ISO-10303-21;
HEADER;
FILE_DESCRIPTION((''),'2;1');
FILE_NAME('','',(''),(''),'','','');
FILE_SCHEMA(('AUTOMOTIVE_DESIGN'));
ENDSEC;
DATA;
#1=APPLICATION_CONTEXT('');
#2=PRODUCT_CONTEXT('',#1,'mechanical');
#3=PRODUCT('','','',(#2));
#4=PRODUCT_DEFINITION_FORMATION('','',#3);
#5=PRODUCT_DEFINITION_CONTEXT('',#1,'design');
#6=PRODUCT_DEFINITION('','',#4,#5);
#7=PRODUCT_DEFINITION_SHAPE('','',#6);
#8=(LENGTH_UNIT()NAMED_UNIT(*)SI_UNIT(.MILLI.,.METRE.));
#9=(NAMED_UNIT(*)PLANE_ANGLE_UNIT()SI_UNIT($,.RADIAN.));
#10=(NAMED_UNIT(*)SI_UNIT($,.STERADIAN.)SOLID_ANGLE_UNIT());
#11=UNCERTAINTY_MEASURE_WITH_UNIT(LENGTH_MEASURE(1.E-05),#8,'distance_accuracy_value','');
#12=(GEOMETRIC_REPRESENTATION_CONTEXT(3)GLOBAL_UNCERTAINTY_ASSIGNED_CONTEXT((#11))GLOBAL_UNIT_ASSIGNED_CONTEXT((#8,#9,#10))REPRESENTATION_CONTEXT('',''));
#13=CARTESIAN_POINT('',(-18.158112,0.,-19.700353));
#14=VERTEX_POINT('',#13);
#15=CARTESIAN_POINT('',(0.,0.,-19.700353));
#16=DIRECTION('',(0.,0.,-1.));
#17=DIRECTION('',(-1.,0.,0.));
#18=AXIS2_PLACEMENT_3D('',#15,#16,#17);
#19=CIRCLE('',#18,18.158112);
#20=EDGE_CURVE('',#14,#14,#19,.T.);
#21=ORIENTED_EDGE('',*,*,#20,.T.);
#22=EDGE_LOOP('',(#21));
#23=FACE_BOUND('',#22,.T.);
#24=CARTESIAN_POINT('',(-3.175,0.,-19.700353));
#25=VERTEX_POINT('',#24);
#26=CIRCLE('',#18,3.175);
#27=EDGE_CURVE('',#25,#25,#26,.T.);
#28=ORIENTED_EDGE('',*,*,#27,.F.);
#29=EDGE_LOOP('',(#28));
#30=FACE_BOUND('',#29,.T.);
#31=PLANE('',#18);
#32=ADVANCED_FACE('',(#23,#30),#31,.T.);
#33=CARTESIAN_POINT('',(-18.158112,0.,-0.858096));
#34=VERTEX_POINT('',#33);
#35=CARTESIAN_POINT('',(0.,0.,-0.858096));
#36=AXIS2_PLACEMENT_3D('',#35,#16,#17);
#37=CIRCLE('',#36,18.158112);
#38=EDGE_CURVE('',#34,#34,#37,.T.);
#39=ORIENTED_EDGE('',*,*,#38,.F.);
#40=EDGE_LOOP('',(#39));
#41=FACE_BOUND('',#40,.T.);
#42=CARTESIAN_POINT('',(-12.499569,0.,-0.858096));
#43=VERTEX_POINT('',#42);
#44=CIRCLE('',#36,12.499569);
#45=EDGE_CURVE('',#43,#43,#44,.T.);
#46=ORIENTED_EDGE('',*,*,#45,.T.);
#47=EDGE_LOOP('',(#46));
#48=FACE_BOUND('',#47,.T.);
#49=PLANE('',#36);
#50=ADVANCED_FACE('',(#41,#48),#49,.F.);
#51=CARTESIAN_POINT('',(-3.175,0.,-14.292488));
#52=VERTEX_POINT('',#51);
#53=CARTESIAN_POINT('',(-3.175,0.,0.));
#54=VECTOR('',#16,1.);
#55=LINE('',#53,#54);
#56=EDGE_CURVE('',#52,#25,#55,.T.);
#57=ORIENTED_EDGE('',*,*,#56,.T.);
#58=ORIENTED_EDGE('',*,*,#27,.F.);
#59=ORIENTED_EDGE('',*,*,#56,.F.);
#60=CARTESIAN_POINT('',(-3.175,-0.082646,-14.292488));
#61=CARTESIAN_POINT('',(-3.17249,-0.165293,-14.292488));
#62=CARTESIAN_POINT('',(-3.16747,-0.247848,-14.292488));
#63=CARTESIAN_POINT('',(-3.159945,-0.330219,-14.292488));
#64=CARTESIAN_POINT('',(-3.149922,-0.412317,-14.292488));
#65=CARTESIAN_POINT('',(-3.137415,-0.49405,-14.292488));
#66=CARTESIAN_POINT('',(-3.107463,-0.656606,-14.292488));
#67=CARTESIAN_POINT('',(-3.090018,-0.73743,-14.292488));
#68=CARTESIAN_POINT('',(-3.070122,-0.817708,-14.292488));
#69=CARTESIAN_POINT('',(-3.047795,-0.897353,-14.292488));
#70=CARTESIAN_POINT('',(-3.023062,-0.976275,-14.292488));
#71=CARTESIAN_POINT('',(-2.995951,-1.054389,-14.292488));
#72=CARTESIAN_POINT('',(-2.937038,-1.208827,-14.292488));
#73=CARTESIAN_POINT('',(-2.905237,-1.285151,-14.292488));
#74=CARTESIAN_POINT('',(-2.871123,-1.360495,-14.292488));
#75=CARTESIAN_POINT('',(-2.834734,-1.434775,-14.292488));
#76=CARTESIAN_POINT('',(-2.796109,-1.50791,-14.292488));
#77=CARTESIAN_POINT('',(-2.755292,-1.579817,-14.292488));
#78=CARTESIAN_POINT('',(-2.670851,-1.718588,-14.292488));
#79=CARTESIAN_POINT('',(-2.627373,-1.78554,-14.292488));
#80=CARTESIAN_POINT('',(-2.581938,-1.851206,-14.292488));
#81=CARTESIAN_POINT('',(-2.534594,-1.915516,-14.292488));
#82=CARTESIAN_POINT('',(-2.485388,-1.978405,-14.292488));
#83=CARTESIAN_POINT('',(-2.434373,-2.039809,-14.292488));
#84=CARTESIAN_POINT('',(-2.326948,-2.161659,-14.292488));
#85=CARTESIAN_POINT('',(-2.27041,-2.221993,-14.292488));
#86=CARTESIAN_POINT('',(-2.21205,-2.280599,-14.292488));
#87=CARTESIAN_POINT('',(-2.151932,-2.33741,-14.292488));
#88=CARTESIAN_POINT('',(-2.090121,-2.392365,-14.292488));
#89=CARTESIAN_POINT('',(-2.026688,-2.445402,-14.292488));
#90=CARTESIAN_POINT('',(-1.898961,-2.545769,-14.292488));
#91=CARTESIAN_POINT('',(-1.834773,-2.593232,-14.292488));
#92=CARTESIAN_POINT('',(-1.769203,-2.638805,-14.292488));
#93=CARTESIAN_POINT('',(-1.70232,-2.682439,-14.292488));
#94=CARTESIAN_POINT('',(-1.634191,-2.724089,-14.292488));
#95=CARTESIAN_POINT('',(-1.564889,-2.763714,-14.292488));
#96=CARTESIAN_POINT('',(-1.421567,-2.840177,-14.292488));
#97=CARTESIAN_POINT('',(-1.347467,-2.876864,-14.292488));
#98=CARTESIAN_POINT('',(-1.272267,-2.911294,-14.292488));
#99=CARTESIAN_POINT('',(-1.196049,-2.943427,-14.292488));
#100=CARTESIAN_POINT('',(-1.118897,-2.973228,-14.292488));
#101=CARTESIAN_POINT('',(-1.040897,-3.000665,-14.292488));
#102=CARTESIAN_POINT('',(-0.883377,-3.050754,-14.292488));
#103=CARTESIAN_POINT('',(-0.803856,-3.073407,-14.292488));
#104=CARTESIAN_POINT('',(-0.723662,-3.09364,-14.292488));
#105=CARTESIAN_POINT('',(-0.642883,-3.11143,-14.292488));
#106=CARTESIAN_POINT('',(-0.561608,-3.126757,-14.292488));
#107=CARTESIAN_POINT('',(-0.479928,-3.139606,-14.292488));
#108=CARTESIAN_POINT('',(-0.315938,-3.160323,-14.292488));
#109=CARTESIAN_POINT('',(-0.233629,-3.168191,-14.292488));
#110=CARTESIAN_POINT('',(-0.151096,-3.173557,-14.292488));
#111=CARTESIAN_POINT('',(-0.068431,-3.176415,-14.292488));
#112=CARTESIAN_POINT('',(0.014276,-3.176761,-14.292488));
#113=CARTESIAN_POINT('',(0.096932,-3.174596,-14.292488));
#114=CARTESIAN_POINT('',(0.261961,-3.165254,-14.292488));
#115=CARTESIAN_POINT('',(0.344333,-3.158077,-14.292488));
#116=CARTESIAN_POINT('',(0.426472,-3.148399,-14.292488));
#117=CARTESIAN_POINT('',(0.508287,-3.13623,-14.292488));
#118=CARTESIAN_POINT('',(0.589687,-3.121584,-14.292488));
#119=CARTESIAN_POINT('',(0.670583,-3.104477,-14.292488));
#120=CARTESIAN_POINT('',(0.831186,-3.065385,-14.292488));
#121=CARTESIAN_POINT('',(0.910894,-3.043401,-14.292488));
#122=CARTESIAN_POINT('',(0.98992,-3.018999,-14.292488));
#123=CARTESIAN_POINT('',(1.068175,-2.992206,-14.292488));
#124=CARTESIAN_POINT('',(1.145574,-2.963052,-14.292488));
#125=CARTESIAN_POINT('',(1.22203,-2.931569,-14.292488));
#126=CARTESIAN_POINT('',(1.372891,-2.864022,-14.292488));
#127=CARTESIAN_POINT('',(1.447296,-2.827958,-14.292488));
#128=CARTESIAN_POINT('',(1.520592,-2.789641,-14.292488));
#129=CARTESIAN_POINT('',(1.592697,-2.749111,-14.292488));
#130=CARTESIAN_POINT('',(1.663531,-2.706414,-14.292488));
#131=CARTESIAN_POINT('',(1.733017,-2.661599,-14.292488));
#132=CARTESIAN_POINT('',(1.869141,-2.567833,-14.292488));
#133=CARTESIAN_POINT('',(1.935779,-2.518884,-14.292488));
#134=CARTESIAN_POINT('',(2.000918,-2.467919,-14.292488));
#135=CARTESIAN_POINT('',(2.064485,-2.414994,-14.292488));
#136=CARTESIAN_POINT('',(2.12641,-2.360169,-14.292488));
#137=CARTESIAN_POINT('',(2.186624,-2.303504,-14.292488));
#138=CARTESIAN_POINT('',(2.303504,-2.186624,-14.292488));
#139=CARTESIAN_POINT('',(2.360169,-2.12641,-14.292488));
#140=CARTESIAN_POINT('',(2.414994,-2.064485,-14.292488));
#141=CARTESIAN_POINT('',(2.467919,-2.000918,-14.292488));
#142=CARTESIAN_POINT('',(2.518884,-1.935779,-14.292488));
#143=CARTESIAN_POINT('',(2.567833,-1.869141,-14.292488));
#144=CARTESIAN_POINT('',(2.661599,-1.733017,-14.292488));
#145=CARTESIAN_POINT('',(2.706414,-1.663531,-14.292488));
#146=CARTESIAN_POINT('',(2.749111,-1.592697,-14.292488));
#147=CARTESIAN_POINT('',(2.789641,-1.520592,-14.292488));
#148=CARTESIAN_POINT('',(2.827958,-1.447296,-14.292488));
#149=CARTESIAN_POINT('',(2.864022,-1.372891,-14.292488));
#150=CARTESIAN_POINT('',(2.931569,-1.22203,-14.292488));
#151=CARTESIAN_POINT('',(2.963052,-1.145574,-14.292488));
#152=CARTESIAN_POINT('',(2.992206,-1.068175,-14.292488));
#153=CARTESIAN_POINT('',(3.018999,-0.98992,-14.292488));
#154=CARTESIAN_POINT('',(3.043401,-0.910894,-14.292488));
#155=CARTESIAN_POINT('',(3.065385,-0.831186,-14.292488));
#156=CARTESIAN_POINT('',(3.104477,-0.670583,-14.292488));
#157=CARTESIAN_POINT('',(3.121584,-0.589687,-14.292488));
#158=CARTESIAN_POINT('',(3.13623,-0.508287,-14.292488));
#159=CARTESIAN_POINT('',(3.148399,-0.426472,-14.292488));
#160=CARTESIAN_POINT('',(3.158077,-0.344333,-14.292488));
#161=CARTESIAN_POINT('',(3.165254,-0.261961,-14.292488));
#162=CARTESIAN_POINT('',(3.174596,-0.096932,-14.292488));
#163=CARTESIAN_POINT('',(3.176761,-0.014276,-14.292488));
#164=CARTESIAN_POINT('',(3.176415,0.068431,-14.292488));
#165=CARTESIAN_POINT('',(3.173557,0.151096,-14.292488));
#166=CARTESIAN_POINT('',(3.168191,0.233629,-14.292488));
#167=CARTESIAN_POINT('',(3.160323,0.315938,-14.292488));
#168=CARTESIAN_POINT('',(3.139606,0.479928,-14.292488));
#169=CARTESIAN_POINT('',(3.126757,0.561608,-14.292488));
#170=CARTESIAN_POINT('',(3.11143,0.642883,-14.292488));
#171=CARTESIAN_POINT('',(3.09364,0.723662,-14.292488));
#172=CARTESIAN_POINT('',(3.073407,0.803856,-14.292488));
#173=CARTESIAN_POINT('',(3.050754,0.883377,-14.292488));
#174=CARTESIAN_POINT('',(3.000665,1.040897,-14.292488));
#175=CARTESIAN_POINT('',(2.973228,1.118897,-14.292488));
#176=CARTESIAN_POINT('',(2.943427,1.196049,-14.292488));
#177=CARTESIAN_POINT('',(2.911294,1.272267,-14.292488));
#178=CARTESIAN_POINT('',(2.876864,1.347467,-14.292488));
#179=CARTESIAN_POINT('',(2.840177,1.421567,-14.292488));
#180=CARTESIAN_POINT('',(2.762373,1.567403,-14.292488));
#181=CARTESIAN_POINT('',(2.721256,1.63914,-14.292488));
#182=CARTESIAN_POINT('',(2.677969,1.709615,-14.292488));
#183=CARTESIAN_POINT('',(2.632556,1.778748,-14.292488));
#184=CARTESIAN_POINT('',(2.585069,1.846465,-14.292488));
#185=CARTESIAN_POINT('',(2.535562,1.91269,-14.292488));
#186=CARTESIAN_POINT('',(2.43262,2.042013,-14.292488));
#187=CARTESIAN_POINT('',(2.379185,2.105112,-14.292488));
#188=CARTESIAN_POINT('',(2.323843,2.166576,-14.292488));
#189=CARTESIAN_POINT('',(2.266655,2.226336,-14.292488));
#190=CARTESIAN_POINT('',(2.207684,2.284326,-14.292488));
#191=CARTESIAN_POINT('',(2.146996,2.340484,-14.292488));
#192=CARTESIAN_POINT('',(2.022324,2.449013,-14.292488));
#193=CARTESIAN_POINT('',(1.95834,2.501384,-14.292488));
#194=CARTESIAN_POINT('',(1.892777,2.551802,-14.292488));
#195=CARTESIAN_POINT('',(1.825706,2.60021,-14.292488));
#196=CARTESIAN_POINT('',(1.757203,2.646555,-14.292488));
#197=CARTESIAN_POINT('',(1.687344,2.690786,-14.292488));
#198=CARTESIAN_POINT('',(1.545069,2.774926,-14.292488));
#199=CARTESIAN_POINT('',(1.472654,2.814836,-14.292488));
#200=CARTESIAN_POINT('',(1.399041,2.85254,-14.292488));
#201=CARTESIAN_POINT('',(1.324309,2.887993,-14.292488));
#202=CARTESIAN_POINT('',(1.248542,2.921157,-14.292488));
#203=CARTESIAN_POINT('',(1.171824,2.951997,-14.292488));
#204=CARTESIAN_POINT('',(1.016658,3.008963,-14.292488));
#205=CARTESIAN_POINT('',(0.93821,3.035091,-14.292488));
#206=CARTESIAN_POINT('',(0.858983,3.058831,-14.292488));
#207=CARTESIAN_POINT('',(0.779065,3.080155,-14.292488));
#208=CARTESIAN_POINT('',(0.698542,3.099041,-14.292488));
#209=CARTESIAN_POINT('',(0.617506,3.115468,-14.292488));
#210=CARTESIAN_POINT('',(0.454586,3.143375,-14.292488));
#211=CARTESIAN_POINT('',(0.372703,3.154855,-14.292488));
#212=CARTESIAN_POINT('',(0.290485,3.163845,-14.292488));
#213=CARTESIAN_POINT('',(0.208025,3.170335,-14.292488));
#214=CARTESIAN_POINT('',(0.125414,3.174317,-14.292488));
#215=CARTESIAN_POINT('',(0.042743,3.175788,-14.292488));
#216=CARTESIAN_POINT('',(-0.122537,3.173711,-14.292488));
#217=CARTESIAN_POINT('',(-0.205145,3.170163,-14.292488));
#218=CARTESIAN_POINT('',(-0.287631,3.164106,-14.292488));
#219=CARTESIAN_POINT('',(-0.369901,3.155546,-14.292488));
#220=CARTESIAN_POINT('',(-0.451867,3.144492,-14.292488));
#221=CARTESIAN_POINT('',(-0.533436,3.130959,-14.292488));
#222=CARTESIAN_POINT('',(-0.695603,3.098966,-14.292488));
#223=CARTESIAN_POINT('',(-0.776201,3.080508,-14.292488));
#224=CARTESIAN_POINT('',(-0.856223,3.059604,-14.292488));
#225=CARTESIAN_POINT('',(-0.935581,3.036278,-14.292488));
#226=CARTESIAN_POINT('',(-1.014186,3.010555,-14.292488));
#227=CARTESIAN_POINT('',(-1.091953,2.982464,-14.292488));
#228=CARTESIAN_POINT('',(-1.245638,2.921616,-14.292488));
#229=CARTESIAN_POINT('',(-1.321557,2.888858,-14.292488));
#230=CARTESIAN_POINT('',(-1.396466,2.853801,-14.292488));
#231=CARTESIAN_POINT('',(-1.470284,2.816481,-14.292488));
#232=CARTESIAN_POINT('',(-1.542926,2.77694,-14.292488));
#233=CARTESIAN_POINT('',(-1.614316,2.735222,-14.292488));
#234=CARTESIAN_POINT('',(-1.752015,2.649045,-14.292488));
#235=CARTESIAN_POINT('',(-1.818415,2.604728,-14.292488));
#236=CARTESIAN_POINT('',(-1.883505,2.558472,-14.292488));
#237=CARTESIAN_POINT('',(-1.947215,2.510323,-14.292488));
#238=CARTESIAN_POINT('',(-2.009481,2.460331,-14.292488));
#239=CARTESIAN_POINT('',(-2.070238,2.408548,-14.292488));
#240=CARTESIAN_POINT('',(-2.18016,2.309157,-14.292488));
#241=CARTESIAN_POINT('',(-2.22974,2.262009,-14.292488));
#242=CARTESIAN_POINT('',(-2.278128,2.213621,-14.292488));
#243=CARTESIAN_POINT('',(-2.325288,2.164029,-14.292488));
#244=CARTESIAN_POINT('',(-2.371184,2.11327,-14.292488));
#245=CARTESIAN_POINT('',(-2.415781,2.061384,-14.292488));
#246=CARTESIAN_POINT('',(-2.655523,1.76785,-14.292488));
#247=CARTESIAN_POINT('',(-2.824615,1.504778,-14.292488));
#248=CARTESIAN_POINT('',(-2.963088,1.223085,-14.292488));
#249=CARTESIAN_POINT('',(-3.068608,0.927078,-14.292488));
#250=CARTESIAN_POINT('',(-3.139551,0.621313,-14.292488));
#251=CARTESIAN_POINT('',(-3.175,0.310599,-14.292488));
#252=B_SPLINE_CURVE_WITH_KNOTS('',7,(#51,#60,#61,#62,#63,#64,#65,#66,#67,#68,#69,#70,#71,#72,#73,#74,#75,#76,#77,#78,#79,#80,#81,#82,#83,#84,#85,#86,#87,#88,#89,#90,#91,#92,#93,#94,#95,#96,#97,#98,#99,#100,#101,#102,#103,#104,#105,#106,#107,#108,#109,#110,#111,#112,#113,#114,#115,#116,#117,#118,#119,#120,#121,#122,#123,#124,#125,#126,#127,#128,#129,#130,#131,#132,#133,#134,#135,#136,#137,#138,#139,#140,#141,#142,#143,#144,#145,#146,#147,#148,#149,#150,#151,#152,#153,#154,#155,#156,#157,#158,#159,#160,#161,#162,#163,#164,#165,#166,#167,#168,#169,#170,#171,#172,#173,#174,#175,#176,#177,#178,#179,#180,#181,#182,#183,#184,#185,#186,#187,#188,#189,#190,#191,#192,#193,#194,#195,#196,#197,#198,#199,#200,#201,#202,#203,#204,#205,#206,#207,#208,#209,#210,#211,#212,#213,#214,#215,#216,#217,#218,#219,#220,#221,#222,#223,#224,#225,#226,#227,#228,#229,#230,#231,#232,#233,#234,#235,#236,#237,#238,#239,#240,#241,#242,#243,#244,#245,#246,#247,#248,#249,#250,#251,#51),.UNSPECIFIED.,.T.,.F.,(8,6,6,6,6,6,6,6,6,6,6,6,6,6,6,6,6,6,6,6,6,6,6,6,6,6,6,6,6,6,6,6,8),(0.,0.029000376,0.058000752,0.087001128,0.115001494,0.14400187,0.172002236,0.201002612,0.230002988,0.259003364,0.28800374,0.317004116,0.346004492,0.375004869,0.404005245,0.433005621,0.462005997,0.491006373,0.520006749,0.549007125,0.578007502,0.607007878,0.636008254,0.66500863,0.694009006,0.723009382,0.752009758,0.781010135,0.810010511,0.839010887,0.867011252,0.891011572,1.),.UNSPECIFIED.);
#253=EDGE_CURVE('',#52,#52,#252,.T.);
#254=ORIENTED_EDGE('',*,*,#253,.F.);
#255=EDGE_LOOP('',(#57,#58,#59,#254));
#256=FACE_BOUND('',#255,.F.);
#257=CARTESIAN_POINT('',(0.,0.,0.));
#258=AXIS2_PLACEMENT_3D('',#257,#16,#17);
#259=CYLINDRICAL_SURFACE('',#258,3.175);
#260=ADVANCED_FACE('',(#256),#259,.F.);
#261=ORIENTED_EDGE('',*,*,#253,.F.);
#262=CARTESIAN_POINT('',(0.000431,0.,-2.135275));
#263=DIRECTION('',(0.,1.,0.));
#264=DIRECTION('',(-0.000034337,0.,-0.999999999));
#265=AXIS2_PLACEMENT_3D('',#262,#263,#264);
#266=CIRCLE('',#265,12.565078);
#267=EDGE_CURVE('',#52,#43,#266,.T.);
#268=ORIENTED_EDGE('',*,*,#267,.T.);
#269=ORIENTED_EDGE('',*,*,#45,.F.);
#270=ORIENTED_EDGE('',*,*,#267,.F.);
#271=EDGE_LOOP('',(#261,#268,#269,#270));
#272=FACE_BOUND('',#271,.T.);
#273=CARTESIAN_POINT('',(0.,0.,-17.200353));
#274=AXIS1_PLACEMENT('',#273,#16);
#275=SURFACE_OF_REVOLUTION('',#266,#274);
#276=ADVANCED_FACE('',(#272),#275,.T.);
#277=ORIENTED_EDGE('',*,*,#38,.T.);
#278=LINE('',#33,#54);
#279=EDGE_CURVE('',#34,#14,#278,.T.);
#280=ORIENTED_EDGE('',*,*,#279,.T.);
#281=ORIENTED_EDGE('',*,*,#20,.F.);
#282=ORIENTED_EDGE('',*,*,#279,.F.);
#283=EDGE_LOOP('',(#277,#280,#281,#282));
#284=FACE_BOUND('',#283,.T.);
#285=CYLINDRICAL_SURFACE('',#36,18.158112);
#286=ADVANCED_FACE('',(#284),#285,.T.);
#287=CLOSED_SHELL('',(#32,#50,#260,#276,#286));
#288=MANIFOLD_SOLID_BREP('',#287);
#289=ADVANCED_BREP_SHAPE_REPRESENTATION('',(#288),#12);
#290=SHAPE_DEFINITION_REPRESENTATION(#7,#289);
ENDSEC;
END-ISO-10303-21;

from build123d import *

# Parameters (mm, degrees)
F3_D           = 6.35
F3_CSINK_D     = 6.5
F3_CSINK_ANGLE = 90


# Not quite as in the source:
# - a feature names something its author has since deleted; it is built from what else it names


with BuildPart() as f1:
    # F0 (on Front) → F1 (revolve)
    with BuildSketch(Plane.XZ):
        with BuildLine():
            ThreePointArc((0, -14.7003533737), (-9.3251902794, -10.5563183954), (-12.4995685583, -0.8580957649))
            Line((-12.4995685583, -0.8580957649), (-18.1581123865, -0.8580957649))
            Line((-18.1581123865, -0.8580957649), (-18.1581123865, -19.7003533737))
            Line((-18.1581123865, -19.7003533737), (0, -19.7003533737))
            Line((0, -19.7003533737), (0, -14.7003533737))
        make_face()
    revolve(axis=Axis((0, 0, -17.2003533737), (0, 0, -1)))

    # F3 (through all)
    with Locations(Plane.XY):
        with Locations((0, 0)):
            CounterSinkHole(F3_D / 2, F3_CSINK_D / 2, counter_sink_angle=F3_CSINK_ANGLE)


solid = f1.part
